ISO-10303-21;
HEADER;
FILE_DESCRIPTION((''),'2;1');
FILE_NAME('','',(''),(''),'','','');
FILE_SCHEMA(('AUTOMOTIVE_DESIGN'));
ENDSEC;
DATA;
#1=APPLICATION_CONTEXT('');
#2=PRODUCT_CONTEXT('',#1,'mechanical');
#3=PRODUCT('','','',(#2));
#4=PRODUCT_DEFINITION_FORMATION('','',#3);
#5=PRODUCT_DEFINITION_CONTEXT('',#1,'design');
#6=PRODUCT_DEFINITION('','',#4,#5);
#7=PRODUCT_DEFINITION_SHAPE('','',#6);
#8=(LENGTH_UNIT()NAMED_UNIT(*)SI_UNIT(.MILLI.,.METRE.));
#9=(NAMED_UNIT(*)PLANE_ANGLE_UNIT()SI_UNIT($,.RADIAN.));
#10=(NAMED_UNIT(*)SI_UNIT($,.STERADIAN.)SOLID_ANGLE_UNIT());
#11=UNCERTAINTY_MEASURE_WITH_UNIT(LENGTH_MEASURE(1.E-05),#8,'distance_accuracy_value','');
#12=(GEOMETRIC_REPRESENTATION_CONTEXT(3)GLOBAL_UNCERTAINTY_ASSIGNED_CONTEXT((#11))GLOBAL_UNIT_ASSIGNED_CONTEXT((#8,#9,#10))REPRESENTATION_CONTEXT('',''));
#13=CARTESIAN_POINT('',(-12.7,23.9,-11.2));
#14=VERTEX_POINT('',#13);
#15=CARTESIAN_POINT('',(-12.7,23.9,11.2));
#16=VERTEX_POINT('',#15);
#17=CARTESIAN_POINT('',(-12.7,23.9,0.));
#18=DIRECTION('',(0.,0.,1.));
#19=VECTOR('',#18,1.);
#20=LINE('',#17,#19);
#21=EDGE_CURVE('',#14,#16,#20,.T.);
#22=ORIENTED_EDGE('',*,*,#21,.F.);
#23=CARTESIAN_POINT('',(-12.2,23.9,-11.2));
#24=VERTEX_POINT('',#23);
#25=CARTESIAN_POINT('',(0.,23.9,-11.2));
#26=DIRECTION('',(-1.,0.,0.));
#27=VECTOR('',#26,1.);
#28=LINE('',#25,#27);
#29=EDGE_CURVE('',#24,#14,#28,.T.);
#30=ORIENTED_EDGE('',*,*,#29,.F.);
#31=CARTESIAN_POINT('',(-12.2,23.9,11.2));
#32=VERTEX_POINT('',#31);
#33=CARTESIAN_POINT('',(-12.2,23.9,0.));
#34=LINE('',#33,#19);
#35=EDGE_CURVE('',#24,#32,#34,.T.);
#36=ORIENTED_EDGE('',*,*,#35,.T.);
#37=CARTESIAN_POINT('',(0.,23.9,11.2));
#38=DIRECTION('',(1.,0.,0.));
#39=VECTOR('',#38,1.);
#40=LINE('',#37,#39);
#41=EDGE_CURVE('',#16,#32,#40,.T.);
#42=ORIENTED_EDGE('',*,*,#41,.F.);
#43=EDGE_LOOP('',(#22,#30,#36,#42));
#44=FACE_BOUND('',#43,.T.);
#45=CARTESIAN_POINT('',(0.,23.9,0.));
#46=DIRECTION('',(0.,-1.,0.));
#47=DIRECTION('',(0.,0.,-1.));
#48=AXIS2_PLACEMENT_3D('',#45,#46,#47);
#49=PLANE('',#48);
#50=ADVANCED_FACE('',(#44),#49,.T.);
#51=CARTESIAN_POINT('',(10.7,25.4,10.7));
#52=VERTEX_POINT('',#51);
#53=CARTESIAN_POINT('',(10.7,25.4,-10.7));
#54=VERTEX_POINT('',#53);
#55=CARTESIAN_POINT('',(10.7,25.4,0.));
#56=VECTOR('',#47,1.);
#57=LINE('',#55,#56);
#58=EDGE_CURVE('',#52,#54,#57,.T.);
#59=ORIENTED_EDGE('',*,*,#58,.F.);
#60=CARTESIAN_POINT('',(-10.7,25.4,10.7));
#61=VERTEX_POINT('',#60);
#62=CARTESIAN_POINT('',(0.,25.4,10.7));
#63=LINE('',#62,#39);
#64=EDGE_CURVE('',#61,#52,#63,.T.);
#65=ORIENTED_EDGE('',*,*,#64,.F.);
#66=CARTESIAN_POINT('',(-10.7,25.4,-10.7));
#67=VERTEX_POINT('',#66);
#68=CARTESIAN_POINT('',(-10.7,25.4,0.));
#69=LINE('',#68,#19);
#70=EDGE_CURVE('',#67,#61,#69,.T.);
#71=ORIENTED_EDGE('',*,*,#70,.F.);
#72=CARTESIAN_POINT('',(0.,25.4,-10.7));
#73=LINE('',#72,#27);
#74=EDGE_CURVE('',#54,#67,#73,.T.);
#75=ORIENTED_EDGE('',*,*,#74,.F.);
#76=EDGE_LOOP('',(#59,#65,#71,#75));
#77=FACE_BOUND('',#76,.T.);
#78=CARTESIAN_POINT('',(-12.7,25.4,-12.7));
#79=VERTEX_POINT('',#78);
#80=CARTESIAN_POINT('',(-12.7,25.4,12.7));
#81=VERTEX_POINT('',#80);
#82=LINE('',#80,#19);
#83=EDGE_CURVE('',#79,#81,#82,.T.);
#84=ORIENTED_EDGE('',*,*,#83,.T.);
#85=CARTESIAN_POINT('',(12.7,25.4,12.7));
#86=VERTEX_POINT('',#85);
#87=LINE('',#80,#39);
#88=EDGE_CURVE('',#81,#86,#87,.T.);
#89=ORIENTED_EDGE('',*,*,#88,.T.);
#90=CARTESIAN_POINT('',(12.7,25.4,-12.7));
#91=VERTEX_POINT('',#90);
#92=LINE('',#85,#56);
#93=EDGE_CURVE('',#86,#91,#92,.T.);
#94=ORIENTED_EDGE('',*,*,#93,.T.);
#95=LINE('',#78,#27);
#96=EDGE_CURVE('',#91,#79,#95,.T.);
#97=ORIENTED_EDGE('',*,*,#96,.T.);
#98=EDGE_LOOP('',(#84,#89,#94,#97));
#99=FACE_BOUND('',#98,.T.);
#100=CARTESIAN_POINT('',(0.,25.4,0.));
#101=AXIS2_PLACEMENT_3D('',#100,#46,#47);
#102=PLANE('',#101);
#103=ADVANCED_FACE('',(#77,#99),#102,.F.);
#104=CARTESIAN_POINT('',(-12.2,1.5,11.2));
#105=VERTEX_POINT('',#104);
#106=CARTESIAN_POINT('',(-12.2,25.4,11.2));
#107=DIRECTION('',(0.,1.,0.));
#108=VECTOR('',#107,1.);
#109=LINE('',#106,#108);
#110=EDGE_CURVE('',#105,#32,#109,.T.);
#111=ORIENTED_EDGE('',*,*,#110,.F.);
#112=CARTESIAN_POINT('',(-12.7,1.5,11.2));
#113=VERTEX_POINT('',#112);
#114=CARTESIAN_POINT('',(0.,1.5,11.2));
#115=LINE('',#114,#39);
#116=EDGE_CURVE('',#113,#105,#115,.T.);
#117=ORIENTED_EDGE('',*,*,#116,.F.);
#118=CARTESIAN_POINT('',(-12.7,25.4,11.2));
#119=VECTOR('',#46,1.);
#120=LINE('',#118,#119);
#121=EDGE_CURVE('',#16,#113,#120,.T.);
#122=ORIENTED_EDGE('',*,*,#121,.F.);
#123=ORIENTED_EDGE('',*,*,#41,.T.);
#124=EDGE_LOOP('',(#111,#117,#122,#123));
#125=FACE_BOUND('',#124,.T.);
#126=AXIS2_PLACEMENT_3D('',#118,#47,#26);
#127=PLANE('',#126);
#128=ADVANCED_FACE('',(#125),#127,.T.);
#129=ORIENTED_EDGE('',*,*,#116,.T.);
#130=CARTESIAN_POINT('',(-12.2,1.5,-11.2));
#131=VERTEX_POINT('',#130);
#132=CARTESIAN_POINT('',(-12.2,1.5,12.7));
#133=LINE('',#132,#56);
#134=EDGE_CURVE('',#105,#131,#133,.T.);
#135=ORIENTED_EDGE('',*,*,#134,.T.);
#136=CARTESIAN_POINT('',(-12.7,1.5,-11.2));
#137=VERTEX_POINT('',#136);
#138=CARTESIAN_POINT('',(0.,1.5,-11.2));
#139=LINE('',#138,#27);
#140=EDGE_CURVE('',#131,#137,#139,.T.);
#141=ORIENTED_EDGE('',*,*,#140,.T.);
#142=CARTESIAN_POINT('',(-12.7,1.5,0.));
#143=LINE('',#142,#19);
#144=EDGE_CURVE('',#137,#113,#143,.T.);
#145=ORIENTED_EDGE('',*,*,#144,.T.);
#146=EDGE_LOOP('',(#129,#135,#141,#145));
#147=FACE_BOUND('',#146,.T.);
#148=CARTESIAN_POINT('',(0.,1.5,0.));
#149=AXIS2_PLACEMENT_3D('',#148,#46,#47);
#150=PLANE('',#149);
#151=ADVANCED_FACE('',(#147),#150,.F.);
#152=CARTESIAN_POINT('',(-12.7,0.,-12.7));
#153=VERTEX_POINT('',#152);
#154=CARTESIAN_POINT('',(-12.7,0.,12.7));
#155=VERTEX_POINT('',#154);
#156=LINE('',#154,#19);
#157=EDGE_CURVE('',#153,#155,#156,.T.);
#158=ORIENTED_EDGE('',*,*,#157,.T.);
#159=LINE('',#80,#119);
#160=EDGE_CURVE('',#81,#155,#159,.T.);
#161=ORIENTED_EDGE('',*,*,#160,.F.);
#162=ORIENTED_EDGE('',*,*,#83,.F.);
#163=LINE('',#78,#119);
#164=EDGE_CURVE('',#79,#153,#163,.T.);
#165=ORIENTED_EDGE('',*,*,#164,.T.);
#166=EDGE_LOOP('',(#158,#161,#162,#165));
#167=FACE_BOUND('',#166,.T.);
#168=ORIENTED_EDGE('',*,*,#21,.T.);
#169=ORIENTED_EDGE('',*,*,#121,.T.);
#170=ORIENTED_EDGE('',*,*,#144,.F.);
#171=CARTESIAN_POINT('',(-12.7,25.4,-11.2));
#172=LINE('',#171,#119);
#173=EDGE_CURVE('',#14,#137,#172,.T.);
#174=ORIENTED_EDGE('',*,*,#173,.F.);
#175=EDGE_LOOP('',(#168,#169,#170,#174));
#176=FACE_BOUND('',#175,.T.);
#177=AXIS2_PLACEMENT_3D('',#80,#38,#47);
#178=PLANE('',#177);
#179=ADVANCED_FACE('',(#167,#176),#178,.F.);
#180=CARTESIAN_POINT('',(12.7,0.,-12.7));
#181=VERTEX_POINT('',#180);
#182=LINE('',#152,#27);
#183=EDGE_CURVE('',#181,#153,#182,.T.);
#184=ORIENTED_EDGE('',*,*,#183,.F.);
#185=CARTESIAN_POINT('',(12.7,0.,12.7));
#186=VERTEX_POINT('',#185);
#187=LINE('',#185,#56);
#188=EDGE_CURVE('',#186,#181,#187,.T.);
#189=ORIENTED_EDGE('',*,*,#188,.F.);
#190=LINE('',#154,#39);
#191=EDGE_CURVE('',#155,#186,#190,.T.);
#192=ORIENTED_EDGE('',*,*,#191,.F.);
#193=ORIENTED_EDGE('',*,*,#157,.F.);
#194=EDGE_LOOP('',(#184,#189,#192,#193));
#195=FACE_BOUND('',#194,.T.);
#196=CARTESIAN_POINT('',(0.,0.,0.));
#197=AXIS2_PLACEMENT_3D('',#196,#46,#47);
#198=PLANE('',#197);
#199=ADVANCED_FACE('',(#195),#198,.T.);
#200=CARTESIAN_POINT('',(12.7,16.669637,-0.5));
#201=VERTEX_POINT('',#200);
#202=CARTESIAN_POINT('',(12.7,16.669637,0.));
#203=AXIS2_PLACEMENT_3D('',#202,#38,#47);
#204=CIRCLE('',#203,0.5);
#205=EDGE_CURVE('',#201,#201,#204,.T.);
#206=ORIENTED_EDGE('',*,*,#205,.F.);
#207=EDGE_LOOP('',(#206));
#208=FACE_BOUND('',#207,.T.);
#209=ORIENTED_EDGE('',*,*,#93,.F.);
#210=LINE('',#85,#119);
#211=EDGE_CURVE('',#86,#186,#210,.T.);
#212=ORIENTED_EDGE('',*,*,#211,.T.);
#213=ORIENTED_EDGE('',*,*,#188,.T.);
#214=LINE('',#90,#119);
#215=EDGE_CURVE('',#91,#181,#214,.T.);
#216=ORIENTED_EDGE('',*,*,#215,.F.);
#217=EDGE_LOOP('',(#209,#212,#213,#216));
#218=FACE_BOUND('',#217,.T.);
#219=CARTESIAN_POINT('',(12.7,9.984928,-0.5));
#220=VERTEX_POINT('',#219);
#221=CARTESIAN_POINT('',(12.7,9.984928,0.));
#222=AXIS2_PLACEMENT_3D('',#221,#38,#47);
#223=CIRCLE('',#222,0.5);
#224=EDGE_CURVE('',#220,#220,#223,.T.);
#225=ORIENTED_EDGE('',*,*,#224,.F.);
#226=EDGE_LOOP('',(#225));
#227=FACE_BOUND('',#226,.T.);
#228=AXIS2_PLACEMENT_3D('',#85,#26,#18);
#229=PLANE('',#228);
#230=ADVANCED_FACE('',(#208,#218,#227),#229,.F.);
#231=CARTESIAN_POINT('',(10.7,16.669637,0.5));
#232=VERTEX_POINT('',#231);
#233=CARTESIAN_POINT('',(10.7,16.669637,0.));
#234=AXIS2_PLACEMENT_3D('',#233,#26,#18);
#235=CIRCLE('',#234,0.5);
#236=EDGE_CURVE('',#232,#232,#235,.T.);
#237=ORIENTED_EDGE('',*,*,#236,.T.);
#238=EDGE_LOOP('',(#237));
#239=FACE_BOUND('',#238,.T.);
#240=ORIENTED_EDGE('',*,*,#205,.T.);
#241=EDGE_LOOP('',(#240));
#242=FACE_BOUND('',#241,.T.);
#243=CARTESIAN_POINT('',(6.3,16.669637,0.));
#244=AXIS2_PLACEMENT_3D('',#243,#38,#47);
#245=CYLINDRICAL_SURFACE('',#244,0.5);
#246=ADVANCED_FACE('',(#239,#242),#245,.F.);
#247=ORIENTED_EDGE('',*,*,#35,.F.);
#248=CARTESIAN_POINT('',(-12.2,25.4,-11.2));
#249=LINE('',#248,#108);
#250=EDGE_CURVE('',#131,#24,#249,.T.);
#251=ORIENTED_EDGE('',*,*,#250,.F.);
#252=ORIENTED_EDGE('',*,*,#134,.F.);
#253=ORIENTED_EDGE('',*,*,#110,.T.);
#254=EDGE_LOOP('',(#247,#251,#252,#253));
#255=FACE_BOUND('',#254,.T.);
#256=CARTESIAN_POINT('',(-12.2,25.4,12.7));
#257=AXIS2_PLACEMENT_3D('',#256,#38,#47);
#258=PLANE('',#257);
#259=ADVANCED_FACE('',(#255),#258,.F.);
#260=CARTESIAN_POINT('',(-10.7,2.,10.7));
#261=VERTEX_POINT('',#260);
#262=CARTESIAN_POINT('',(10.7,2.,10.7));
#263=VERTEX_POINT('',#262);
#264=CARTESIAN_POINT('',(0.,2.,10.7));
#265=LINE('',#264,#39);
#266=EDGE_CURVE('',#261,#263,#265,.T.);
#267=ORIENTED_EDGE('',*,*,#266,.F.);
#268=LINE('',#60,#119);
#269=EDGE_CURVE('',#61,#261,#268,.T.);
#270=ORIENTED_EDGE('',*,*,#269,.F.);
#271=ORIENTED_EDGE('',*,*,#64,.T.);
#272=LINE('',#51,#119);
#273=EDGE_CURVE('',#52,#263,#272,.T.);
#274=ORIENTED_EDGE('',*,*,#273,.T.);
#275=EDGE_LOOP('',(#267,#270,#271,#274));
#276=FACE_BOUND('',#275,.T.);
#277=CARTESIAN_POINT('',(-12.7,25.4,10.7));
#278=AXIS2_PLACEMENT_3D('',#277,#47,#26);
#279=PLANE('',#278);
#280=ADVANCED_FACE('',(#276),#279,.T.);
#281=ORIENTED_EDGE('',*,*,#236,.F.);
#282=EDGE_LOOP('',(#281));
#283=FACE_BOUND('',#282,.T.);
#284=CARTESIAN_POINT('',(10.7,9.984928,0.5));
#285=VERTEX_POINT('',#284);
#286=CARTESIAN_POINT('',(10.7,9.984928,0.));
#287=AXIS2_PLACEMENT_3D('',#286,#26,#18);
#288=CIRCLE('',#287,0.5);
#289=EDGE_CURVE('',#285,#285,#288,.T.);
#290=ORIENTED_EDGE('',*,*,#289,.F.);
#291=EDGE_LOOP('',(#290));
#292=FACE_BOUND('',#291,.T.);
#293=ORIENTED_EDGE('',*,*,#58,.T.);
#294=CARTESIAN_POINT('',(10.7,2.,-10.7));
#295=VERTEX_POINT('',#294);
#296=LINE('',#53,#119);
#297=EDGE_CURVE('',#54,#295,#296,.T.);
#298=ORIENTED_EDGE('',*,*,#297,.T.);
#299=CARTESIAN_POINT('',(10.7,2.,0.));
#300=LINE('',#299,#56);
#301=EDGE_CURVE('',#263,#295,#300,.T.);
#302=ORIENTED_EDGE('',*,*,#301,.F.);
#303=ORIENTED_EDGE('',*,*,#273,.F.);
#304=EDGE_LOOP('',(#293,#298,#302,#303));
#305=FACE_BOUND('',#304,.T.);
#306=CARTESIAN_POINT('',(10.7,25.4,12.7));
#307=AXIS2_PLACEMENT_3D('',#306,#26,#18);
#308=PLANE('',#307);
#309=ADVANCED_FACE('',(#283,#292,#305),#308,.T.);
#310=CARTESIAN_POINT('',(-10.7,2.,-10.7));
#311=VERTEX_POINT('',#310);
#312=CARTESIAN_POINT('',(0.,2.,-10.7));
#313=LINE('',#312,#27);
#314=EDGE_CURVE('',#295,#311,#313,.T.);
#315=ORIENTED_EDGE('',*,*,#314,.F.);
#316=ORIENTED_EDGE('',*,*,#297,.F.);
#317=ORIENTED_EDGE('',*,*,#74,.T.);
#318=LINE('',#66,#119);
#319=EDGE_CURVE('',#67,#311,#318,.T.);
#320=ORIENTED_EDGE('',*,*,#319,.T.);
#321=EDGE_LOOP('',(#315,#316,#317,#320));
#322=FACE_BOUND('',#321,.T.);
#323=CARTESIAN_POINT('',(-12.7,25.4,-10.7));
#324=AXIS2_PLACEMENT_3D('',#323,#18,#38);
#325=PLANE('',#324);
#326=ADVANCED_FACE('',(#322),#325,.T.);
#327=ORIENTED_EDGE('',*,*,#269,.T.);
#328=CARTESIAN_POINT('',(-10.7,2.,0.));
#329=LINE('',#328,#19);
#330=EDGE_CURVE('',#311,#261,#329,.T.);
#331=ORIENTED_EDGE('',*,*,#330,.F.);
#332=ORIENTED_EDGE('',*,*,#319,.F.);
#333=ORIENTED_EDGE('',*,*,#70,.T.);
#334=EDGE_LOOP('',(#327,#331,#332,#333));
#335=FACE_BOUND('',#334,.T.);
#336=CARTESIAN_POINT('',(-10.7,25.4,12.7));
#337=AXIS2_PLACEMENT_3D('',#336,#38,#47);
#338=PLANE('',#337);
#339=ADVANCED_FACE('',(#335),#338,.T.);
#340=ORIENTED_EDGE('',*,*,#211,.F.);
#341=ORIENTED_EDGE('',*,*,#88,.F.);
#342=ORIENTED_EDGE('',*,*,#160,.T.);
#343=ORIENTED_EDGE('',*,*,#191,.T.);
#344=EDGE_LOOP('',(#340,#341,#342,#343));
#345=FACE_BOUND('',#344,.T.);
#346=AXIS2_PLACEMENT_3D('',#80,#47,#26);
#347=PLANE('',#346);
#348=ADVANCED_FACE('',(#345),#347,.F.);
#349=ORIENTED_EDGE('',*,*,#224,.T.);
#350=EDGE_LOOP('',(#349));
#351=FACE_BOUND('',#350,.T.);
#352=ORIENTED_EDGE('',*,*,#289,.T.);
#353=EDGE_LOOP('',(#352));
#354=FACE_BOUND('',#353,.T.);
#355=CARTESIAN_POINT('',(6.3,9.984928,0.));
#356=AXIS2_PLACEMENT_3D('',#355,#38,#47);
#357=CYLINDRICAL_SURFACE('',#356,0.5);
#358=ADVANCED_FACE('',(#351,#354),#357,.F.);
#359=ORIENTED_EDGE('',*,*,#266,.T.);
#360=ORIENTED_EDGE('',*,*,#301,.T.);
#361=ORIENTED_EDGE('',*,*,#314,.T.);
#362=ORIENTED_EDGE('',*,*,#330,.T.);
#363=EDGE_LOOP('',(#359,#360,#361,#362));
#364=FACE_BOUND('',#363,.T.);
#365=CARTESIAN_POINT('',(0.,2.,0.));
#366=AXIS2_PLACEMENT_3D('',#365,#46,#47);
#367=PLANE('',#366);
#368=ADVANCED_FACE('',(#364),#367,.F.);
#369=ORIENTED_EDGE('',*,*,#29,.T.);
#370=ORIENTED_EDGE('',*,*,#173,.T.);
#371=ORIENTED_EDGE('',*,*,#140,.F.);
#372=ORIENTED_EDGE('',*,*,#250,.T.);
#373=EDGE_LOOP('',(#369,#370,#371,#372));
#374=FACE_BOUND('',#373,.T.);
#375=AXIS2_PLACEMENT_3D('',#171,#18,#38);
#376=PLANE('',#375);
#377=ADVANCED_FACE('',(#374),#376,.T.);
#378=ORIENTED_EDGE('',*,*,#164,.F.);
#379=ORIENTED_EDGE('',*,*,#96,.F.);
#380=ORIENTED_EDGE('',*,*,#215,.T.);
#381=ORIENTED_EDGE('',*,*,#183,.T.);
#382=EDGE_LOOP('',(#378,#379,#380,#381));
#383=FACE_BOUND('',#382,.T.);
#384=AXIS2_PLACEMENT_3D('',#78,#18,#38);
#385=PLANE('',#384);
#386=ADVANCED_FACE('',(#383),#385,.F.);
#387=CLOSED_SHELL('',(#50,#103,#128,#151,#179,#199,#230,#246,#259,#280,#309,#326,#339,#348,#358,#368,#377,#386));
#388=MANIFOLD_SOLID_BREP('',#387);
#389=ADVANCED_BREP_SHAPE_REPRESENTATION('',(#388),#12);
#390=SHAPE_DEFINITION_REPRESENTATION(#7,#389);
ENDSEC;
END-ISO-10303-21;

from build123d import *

# Parameters (mm, degrees)
SKETCH1_W           = 25.4
SKETCH1_H           = 25.4
BOSS_EXTRUDE1_DEPTH = 25.4
SHELL1_T            = -2
SKETCH2_R           = 0.5
CUT_EXTRUDE1_DEPTH  = 6.4
SKETCH3_R           = 0.5
CUT_EXTRUDE2_DEPTH  = 6.4
SHELL2_START        = 1.5
SHELL2_OUTLINE_W    = 0.5
SHELL2_OUTLINE_H    = 22.4
SHELL2_DEPTH        = 22.4


# Read off the part's stored shape, not the designer's step: Shell2
with BuildPart() as part:
    # Sketch1 → Boss-Extrude1 (new body)
    with BuildSketch(Plane(origin=(0, 0, 0), x_dir=(1, 0, 0), z_dir=(0, 1, 0))):
        Rectangle(SKETCH1_W, SKETCH1_H)
    extrude(amount=BOSS_EXTRUDE1_DEPTH)

    # Shell1
    shell1_openings = [part.faces().sort_by_distance(p)[0] for p in [
        (0, 25.4, 0),
    ]]
    offset(amount=SHELL1_T, openings=shell1_openings, kind=Kind.INTERSECTION)

    # Sketch2 → Cut-Extrude1 (cut)
    with BuildSketch(Plane(origin=(12.7, 0, 0), x_dir=(0, 0, -1), z_dir=(1, 0, 0))):
        with Locations((0, 9.984928122)):
            Circle(SKETCH2_R)
    extrude(amount=-CUT_EXTRUDE1_DEPTH, mode=Mode.SUBTRACT)

    # Sketch3 → Cut-Extrude2 (cut)
    with BuildSketch(Plane(origin=(12.7, 0, 0), x_dir=(0, 0, -1), z_dir=(1, 0, 0))):
        with Locations((0, 16.669636536)):
            Circle(SKETCH3_R)
    extrude(amount=-CUT_EXTRUDE2_DEPTH, mode=Mode.SUBTRACT)

    # Shell2 outline → Shell2 (cut)
    with BuildSketch(Plane(origin=(0, 0, 0), x_dir=(1, 0, 0), z_dir=(0, 1, 0)).offset(SHELL2_START)):
        with Locations((-12.45, 0)):
            Rectangle(SHELL2_OUTLINE_W, SHELL2_OUTLINE_H)
    extrude(amount=SHELL2_DEPTH, mode=Mode.SUBTRACT)


solid = part.part
